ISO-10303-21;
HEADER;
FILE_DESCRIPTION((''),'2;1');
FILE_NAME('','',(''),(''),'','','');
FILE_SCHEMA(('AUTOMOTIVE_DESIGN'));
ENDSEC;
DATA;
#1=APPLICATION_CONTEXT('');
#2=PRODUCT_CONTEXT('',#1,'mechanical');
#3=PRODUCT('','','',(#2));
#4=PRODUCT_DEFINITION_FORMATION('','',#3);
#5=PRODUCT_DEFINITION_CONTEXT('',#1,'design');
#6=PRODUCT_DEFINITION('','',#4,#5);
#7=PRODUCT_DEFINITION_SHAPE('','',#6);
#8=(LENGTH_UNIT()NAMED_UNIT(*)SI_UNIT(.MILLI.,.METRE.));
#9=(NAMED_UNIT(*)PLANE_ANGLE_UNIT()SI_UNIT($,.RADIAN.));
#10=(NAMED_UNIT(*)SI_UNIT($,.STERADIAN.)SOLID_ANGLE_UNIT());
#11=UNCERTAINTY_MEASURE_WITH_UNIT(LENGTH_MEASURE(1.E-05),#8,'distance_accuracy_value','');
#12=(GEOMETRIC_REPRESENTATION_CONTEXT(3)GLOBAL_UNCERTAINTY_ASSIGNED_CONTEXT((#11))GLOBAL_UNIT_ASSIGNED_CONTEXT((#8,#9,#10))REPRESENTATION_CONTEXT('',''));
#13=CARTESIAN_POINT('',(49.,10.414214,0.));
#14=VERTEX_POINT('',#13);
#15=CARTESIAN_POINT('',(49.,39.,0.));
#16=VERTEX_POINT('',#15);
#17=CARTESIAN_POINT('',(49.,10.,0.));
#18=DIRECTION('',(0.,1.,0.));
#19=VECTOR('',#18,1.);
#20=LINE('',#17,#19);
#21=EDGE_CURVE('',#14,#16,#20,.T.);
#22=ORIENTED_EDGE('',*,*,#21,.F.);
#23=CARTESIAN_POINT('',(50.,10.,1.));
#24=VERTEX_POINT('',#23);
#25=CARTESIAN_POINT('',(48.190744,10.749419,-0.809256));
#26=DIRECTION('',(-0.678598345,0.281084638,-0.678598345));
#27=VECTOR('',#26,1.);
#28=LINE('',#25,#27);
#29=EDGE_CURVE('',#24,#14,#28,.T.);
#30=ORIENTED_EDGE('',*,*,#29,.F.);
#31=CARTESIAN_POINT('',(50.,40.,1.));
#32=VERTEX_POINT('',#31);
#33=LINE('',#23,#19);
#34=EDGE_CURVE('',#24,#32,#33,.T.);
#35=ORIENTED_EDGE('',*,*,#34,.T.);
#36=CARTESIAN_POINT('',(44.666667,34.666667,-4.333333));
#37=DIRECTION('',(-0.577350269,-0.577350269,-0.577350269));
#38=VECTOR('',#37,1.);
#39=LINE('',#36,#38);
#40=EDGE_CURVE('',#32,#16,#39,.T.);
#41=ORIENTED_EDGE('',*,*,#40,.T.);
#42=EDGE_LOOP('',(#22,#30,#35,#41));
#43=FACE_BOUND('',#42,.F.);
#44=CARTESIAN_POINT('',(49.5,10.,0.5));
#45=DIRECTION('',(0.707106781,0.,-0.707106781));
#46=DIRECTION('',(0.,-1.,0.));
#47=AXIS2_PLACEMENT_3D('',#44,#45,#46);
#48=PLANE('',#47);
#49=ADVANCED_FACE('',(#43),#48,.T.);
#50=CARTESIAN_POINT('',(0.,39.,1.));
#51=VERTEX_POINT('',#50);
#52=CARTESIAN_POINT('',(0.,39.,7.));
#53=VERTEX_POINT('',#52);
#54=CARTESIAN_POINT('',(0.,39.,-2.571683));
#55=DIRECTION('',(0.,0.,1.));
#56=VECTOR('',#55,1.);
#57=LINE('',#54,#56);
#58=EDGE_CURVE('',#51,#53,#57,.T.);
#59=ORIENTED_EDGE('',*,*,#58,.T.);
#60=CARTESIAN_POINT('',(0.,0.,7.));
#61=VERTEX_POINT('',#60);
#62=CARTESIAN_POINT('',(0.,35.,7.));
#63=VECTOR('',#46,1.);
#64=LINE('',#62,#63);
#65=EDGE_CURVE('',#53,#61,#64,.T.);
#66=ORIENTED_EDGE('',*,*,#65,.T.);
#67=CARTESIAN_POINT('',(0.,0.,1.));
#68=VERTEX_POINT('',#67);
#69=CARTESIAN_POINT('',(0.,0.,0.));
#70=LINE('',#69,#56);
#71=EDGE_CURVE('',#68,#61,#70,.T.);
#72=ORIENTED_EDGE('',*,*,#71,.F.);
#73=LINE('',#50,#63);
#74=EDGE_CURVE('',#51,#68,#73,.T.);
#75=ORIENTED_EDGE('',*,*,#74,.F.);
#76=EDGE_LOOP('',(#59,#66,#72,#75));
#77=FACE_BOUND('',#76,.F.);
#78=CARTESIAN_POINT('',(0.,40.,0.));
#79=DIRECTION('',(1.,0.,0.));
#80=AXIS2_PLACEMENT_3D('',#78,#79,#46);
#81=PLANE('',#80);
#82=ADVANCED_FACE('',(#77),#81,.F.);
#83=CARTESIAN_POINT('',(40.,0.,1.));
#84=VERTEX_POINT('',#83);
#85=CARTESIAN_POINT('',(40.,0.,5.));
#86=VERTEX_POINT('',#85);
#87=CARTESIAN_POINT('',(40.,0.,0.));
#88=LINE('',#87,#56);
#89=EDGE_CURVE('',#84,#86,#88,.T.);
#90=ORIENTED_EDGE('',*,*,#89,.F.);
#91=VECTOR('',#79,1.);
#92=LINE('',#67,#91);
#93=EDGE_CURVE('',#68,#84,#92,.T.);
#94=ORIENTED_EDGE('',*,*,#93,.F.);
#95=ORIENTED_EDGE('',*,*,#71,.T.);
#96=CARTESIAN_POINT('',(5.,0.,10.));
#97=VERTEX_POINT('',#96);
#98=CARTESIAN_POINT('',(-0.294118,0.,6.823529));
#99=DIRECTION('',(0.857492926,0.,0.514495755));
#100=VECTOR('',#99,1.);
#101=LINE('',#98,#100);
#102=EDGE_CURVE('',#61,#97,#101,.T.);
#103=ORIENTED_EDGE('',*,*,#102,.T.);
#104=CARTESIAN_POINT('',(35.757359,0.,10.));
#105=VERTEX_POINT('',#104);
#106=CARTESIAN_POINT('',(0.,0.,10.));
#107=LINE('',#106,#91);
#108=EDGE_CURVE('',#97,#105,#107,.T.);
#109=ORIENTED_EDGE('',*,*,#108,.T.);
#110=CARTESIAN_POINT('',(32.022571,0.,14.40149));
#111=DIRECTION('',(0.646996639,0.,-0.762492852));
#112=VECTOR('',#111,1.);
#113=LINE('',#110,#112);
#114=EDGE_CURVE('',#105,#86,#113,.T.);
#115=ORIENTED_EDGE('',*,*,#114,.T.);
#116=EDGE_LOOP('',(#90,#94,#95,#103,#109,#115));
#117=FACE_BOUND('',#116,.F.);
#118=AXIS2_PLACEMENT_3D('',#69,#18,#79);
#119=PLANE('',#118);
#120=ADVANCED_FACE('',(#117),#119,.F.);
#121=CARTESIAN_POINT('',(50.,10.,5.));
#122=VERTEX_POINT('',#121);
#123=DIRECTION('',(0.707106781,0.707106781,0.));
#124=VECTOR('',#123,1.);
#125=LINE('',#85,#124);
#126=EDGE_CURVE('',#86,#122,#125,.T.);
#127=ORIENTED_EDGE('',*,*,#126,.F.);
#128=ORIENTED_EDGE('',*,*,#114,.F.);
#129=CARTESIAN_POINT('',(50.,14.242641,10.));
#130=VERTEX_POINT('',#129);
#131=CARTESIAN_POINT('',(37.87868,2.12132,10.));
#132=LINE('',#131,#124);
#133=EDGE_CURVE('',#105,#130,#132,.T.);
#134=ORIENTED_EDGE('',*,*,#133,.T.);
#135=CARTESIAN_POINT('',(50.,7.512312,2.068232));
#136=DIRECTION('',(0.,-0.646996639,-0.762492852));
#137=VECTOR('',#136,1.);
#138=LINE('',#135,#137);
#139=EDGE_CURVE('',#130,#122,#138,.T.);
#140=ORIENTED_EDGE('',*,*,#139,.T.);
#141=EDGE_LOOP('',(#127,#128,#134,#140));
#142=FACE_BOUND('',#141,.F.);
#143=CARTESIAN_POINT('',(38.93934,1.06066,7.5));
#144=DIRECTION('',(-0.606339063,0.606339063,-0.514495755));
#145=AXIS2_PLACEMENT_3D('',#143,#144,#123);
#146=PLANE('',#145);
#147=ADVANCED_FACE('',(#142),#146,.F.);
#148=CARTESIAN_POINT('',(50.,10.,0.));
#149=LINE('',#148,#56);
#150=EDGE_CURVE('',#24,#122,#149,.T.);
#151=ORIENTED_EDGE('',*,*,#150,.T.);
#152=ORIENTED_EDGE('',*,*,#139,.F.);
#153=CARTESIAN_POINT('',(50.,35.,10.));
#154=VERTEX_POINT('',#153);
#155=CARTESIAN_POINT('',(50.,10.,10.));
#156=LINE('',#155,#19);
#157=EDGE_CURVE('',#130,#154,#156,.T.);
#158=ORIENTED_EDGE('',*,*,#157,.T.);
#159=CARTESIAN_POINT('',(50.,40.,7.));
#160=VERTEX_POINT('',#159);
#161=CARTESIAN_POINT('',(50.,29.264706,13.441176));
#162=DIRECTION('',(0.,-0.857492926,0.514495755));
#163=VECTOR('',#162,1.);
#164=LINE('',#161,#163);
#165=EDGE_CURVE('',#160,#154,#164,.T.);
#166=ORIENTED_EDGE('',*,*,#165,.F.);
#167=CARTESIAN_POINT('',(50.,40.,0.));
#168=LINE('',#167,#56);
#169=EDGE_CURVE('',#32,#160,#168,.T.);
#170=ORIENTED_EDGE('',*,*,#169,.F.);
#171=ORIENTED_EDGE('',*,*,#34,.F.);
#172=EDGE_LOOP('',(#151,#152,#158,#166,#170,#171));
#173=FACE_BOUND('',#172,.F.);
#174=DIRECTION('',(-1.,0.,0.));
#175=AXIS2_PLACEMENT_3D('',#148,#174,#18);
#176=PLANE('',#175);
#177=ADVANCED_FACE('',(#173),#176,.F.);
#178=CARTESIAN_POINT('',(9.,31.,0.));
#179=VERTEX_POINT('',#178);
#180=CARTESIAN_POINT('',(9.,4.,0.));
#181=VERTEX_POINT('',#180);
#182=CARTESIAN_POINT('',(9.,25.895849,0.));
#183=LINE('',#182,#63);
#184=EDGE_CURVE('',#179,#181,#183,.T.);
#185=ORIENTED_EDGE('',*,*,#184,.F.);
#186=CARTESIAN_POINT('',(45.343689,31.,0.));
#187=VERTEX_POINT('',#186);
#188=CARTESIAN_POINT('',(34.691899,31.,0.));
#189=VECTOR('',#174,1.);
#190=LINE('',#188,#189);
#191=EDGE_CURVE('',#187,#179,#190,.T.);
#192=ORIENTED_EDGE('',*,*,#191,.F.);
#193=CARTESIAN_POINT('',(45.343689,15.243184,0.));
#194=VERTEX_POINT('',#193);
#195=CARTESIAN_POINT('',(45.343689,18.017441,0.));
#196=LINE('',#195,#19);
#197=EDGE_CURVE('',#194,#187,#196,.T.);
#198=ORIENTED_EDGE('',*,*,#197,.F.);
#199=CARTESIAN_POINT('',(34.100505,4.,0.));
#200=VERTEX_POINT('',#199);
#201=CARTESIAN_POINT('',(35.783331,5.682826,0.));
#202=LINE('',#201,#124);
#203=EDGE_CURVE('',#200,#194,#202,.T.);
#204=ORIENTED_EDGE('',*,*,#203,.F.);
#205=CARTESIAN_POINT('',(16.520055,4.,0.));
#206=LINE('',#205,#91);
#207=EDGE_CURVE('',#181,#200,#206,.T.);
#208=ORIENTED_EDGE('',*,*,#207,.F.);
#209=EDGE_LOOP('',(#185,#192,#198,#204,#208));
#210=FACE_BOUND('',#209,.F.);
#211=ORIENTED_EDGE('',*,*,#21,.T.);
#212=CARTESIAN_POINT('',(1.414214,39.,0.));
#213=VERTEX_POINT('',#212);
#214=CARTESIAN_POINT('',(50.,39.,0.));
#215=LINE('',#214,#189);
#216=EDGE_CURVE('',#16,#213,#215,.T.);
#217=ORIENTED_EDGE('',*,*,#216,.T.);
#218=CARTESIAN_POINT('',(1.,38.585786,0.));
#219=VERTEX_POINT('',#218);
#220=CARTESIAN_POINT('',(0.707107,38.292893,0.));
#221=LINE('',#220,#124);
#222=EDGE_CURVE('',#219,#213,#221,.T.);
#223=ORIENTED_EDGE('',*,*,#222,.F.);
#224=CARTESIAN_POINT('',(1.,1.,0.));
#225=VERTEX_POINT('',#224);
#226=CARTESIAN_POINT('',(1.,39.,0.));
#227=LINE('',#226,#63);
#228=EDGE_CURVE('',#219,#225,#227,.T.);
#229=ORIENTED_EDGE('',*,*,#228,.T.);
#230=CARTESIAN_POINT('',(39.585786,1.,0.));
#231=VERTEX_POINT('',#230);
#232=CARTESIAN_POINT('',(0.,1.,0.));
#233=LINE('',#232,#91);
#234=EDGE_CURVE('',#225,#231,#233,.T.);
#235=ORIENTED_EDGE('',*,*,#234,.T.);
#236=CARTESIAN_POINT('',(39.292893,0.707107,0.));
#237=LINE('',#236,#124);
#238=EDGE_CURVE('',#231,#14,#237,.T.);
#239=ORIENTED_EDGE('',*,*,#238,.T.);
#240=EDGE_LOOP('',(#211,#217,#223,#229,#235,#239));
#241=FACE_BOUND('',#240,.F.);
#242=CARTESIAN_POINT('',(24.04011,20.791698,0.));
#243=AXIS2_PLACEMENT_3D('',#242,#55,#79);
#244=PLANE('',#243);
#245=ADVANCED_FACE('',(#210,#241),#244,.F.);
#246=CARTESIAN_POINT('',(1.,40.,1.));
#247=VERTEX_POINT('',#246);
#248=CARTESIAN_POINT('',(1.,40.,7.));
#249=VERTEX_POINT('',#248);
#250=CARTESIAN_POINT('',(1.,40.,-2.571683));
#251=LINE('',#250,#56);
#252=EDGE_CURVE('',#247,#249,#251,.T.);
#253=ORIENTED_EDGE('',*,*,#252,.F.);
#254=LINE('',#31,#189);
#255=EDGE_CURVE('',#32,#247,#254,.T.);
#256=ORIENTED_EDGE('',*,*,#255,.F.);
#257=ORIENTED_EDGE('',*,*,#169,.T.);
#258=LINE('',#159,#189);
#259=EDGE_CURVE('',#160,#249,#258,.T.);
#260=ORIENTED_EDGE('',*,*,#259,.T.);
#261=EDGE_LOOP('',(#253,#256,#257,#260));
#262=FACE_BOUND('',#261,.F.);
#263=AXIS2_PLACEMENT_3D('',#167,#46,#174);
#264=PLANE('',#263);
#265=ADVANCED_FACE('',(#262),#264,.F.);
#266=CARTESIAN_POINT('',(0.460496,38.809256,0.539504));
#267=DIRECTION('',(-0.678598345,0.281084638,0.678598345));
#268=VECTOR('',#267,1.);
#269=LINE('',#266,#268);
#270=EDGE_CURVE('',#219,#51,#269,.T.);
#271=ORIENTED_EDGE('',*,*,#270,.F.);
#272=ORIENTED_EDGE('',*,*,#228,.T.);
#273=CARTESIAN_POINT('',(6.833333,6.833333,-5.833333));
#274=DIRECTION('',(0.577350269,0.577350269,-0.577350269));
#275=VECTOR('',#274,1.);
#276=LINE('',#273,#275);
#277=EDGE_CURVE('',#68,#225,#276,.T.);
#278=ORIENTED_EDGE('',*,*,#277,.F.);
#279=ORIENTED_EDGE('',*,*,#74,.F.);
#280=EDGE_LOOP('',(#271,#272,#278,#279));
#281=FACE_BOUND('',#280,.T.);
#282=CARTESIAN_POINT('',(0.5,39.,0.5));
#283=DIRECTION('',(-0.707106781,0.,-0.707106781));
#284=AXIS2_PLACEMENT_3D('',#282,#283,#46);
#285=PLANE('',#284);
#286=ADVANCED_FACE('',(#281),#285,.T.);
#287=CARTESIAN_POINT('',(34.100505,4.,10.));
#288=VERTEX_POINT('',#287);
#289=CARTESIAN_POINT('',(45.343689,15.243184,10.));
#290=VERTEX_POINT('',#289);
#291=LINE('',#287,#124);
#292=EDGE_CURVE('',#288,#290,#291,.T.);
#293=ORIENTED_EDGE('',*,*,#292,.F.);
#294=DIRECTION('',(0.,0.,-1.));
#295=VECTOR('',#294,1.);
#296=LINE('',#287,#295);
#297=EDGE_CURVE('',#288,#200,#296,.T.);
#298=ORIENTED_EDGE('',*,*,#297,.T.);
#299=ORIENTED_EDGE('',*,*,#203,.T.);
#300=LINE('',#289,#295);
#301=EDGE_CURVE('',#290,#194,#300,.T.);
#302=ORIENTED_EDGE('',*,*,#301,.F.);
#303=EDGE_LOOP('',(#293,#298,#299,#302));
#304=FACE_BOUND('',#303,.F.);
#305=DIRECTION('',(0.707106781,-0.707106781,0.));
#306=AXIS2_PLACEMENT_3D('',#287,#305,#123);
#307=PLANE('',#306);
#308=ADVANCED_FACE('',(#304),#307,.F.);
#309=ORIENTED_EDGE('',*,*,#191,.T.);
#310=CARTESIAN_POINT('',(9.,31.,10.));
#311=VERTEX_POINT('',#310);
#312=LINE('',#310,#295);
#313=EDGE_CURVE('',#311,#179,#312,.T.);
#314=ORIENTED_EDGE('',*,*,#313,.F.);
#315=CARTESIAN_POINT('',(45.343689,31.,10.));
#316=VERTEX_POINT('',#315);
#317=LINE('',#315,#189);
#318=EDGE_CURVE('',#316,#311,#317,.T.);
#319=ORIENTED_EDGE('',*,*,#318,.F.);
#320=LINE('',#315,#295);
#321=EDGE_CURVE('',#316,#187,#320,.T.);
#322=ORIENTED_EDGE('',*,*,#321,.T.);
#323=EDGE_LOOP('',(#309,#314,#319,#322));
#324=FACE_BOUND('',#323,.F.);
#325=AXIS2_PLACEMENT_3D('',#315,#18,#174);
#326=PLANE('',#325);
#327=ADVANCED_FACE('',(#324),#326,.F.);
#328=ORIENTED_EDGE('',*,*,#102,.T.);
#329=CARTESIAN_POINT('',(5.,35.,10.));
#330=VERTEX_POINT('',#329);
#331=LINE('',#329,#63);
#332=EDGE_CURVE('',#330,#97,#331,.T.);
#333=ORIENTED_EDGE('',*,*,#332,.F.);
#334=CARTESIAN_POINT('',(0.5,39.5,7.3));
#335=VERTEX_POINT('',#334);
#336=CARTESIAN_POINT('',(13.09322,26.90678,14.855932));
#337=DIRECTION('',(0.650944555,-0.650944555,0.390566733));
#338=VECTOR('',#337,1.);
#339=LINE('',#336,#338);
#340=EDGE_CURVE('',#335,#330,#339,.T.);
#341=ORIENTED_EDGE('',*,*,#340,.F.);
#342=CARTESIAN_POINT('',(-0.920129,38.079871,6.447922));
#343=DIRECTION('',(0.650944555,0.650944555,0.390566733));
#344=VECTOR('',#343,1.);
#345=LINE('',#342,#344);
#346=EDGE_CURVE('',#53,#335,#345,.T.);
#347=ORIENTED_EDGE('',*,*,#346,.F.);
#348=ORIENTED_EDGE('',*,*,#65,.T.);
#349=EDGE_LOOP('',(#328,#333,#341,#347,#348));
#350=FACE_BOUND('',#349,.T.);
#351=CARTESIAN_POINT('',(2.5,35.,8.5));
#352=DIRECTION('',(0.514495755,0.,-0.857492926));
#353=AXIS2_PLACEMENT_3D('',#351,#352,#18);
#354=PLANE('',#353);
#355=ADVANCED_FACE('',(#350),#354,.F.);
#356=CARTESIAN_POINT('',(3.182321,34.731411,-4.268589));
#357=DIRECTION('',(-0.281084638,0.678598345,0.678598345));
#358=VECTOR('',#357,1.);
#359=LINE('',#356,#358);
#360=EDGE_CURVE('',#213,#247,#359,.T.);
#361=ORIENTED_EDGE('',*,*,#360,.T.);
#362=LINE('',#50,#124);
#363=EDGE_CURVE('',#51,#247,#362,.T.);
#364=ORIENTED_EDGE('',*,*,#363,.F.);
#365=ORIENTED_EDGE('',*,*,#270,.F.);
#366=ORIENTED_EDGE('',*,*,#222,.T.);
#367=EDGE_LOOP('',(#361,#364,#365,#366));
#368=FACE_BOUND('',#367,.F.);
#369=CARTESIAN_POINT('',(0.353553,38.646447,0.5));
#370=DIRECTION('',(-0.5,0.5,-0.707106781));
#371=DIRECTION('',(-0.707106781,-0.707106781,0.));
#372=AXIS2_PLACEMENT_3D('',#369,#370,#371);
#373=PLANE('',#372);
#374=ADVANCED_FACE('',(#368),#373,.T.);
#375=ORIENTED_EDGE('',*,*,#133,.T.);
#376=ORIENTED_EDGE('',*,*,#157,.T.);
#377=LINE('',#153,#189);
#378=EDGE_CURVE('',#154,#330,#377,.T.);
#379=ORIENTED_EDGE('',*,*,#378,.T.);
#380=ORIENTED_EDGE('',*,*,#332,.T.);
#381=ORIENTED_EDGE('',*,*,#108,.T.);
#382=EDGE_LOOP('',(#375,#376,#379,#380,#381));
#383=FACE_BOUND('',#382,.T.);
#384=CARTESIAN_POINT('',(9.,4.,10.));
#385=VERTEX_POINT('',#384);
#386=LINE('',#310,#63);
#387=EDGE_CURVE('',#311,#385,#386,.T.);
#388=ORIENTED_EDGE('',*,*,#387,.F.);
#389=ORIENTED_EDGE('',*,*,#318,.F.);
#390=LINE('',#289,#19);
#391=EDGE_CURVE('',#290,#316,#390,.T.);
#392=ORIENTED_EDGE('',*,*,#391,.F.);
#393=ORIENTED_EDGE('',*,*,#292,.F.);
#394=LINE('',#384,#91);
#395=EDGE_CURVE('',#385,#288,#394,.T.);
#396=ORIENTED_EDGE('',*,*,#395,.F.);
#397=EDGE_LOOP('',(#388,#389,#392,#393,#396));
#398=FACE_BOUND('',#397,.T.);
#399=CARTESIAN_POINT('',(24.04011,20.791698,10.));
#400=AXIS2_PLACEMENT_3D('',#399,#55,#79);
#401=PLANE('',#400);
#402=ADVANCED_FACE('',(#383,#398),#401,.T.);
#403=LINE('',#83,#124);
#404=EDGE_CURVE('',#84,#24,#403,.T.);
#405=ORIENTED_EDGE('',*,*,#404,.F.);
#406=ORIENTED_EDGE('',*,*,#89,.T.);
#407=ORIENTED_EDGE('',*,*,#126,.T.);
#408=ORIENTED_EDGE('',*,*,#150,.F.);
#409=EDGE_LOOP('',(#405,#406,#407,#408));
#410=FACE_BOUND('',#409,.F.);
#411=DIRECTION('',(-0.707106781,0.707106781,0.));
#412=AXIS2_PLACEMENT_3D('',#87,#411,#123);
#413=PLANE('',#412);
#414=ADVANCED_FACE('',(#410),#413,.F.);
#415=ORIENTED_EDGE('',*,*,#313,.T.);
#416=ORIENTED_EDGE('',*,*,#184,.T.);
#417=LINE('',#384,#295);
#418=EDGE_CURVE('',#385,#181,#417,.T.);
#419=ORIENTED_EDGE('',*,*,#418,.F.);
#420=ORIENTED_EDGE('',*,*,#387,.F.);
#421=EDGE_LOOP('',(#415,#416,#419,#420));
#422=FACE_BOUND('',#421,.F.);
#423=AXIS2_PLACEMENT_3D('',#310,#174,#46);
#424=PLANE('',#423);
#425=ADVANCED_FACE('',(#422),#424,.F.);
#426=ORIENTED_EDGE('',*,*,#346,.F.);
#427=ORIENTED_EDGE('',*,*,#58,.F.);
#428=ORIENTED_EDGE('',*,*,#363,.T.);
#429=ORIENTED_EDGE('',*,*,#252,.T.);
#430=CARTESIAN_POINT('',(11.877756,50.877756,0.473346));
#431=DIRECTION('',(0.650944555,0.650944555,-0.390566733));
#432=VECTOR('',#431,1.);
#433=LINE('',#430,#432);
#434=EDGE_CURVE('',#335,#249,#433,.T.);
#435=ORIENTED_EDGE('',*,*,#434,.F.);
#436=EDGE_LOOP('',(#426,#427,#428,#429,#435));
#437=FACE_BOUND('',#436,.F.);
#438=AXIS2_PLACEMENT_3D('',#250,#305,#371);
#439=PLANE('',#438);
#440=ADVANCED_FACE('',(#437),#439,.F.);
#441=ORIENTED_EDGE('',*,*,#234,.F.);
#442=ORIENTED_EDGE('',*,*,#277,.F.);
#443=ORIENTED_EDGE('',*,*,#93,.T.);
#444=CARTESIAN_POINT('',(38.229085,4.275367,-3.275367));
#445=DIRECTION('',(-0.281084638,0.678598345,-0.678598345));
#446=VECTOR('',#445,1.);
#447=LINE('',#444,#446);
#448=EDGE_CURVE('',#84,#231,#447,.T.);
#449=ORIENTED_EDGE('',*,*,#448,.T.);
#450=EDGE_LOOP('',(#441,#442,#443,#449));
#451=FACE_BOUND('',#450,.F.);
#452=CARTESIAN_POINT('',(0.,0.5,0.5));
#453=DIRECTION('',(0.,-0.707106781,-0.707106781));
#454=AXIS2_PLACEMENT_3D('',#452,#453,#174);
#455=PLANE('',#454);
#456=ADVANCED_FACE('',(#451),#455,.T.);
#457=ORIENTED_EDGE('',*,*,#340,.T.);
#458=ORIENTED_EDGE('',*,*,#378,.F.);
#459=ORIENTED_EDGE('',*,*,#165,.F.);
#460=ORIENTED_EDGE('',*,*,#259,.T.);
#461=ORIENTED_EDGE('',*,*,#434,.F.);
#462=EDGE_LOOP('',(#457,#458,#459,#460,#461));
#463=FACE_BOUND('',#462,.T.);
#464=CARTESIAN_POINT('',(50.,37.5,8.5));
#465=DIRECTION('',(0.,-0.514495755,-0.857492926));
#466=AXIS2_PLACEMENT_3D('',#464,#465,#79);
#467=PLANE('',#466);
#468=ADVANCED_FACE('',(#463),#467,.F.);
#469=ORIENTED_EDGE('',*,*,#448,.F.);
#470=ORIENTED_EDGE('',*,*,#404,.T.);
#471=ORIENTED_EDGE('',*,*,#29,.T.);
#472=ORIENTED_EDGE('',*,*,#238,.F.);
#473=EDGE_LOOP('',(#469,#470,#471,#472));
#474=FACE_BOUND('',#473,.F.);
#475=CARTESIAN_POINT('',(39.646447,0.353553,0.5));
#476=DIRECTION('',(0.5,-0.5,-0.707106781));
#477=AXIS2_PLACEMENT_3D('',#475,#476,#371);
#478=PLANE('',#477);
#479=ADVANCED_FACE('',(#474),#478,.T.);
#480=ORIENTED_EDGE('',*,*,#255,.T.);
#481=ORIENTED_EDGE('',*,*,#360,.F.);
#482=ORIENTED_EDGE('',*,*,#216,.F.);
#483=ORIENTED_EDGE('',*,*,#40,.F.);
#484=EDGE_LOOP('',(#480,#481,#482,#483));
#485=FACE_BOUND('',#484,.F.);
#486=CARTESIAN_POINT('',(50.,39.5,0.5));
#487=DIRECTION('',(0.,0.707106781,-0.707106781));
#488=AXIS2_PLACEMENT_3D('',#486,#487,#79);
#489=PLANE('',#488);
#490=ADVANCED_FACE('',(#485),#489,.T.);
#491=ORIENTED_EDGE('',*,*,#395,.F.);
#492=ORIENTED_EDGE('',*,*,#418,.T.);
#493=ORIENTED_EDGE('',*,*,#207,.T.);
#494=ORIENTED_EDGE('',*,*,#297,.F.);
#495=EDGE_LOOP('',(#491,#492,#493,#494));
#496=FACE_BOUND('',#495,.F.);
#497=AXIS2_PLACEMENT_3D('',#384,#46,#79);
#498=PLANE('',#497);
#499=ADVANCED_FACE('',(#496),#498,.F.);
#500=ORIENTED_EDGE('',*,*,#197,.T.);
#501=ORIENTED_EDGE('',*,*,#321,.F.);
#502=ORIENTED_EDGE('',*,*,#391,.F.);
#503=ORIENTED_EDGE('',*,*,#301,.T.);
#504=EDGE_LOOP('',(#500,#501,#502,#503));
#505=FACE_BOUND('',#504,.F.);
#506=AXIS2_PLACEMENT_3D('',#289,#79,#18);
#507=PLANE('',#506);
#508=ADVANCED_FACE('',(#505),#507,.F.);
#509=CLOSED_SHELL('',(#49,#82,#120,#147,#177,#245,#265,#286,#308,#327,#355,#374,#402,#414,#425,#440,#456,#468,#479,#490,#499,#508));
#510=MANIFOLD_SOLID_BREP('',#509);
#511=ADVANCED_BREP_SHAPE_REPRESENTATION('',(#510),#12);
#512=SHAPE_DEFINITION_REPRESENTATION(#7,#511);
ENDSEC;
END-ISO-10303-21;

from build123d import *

# Parameters (mm, degrees)
F1_DEPTH    = 10
F2_C1_SIZE2 = 5
F2_C1_SIZE  = 3
F2_C2_SIZE2 = 5
F2_C2_SIZE  = 3
F2_C3_SIZE2 = 5
F2_C3_SIZE  = 3
F3_T1_DEPTH = 12.1433659759
F5_SIZE     = 1
F7_DEPTH    = 10.001


# Not quite as in the source:
# - a fillet or chamfer that OpenCascade refuses, or shapes differently, is made with other operations: its cross-section is extruded or revolved along the edge and cut away or added
# - two fillets or chamfers of one size are made in one step


with BuildPart() as f1:
    # F0 (on Top) → F1 (new body)
    with BuildSketch(Plane.XY):
        Polygon((50, 40), (0, 40), (0, 0), (40, 0), (50, 10), align=None)
    extrude(amount=F1_DEPTH)

    # F2: chamfer of 5 x 3 on 3 edges, made by hand

    # F2_c1
    f2_c1_edges = [f1.edges().sort_by_distance(p)[0] for p in [
        (25, 40, 10),
    ]]
    f2_c1_side = f1.faces().sort_by_distance((25, 40, 9.94))[0]
    chamfer(f2_c1_edges, length=F2_C1_SIZE, length2=F2_C1_SIZE2, reference=f2_c1_side)

    # F2_c2
    f2_c2_edges = [f1.edges().sort_by_distance(p)[0] for p in [
        (0, 17.5, 10),
    ]]
    f2_c2_side = f1.faces().sort_by_distance((0, 17.5, 9.94))[0]
    chamfer(f2_c2_edges, length=F2_C2_SIZE, length2=F2_C2_SIZE2, reference=f2_c2_side)

    # F2_c3
    f2_c3_edges = [f1.edges().sort_by_distance(p)[0] for p in [
        (45, 5, 10),
    ]]
    f2_c3_side = f1.faces().sort_by_distance((44.9575735931, 5.0424264069, 10))[0]
    chamfer(f2_c3_edges, length=F2_C3_SIZE, length2=F2_C3_SIZE2, reference=f2_c3_side)

    # F3: chamfer of 1 on 1 edges, made by hand

    # F3_s2 → F3_t1 (cut)
    with BuildSketch(Plane.XY.offset(-2.571682988)):
        Polygon((1, 40), (0, 39), (0, 40), align=None)
    extrude(amount=F3_T1_DEPTH, mode=Mode.SUBTRACT)

    # F5
    f5_edges = [f1.edges().sort_by_distance(p)[0] for p in [
        (50, 25, 0),
        (45, 5, 0),
        (20, 0, 0),
        (0, 19.5, 0),
        (0.5, 39.5, 0),
        (25.5, 40, 0),
    ]]
    chamfer(f5_edges, length=F5_SIZE)

    # F6 (on face) → F7 (cut, through all)
    with BuildSketch(Plane.XY.offset(10)):
        Polygon((9, 31), (9, 4), (34.1005050634, 4), (45.3436888701, 15.2431838067), (45.3436888701, 31), align=None)
    extrude(amount=-F7_DEPTH, mode=Mode.SUBTRACT)


solid = f1.part
